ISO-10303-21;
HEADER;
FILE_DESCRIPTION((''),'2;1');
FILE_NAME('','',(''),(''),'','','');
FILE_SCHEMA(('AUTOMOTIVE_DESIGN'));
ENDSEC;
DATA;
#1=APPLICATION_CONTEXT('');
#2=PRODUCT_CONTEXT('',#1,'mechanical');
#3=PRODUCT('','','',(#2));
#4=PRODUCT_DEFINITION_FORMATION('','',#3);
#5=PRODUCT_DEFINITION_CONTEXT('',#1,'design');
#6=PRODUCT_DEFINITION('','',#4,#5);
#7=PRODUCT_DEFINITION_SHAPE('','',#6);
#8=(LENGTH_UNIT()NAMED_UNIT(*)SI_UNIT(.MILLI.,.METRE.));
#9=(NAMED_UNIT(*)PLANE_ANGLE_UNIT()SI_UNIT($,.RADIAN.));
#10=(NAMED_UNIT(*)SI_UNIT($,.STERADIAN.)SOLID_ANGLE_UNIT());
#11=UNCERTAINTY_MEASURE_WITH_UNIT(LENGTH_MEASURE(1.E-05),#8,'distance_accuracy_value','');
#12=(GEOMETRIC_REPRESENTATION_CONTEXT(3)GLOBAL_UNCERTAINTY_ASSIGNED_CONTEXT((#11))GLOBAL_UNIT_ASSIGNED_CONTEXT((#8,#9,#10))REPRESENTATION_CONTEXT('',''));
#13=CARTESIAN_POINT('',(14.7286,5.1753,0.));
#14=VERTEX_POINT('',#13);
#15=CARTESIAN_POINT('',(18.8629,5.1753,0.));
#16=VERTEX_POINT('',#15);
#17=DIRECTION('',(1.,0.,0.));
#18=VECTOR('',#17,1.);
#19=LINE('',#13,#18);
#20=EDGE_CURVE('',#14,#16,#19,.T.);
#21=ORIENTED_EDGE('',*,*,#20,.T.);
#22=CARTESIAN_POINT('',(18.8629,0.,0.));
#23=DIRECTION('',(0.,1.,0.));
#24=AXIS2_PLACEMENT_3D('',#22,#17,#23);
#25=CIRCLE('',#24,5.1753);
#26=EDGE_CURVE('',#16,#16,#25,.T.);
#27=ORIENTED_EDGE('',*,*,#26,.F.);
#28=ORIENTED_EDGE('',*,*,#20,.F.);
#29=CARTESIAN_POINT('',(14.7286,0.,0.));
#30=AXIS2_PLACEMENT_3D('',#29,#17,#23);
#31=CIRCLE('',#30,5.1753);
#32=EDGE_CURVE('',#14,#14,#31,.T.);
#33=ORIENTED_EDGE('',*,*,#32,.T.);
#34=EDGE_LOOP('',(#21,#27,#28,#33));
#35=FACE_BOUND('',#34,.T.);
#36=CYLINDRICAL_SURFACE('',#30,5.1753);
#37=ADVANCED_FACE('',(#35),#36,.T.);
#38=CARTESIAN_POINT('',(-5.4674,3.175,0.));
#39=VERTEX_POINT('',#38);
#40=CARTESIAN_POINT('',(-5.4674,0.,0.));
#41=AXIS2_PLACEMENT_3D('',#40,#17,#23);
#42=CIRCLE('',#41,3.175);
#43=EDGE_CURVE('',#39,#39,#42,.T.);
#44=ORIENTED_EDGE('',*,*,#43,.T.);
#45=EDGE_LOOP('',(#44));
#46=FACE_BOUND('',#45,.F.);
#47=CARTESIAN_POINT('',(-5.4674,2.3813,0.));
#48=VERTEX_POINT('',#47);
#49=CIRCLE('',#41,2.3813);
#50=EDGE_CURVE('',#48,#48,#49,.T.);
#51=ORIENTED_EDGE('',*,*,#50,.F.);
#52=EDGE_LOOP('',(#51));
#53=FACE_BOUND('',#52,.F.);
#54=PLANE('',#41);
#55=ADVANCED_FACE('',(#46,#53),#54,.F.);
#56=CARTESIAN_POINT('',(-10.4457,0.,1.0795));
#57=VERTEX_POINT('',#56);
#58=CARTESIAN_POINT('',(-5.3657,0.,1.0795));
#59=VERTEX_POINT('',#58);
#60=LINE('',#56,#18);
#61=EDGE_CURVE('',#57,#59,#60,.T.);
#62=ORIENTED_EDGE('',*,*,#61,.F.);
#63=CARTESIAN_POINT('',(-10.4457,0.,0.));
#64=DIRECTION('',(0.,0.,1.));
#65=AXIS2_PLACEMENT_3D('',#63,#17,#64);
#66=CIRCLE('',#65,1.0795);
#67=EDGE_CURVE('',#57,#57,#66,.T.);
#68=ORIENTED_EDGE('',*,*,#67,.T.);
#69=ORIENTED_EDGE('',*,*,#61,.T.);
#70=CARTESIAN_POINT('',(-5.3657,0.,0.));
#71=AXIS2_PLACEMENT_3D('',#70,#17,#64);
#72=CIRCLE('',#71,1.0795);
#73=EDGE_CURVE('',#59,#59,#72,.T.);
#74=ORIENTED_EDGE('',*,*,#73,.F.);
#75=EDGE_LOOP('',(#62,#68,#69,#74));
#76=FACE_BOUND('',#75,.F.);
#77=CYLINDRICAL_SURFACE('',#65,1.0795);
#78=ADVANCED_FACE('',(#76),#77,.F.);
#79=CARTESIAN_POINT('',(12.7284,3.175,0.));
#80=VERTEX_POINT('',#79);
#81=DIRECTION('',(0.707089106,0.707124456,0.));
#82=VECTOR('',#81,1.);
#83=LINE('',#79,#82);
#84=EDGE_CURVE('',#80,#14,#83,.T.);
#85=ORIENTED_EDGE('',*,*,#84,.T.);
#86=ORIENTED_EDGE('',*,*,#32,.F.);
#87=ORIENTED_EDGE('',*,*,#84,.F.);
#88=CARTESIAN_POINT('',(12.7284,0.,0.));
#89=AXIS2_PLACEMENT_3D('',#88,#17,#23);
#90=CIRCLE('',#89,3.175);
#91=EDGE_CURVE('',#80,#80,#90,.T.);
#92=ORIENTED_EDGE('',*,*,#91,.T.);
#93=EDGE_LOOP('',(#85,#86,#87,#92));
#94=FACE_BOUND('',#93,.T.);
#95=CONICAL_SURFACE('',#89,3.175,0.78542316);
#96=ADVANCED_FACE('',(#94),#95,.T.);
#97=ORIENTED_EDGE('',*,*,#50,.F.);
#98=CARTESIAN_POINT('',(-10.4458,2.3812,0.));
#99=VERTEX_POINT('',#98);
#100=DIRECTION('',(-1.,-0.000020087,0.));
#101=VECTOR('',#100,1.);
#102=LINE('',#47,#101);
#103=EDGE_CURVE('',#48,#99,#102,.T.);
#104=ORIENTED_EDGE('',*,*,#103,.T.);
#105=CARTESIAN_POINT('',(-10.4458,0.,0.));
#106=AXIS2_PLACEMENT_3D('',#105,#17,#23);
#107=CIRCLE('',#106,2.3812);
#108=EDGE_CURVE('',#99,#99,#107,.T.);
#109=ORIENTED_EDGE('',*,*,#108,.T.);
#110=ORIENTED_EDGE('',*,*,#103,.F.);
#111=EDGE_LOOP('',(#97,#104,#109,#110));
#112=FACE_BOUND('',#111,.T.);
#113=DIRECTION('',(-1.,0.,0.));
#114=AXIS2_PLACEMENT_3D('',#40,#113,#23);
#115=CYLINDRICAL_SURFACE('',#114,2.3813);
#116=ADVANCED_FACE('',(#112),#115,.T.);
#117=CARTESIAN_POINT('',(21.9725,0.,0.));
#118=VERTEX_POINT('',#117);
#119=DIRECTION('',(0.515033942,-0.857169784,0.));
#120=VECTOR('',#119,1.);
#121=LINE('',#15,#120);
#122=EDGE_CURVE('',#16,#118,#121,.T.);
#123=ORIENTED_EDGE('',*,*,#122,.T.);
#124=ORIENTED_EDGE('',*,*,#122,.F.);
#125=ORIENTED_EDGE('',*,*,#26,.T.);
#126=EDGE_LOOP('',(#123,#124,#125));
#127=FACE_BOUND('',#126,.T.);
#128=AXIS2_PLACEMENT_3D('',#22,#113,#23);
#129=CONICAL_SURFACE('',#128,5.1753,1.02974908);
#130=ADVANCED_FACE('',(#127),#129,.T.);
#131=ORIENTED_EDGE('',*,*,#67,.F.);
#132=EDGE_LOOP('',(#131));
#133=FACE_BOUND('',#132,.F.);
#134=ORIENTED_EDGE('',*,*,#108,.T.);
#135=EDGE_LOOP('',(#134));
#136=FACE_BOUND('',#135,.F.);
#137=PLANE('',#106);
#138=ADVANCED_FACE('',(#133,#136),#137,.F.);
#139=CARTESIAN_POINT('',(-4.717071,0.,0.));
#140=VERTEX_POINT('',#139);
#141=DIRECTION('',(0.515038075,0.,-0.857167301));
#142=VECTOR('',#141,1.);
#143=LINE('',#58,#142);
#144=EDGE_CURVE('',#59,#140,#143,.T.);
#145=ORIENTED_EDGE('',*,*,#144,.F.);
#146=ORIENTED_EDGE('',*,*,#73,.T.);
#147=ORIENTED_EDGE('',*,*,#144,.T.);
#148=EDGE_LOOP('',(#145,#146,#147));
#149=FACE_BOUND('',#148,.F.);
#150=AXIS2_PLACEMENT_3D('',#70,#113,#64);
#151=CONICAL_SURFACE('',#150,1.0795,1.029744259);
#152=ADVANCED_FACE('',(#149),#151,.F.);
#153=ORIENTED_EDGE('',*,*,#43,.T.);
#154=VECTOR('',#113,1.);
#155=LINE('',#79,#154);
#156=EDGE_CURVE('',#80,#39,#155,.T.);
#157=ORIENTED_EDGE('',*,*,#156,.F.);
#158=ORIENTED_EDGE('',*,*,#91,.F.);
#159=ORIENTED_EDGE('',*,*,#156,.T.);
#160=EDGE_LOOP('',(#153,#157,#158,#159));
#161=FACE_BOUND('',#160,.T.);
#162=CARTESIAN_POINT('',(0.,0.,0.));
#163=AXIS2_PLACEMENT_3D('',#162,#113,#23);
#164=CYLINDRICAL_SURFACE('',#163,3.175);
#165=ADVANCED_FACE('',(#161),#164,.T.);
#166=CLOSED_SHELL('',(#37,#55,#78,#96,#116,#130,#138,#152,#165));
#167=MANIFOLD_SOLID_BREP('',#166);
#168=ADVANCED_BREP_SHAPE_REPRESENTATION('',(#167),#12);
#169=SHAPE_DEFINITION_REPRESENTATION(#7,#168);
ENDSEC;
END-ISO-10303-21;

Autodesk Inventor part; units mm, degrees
ref_plane "YZ Plane" through (0, 0, 0) normal (1, 0, 0) x (0, 1, 0)
ref_plane "XZ Plane" through (0, 0, 0) normal (0, 1, 0) x (-1, 0, 0)
ref_plane "XY Plane" through (0, 0, 0) normal (0, 0, 1) x (1, 0, 0)
sketch "Sketch1" plane through (0, 0, 0) normal (0, 0, 1) x (1, 0, 0)
  line L0 (0, 0) -> (21.9725, 0)
  line L1 (40.4812, 0) -> (40.4812, 7.9375) construction
  line L2 (40.4812, 7.9375) -> (31.75, 7.9375)
  line L3 (0, 7.9375) -> (0, 6.35)
  line L4 (31.75, 0) -> (31.75, 7.9375) construction
  line L5 (31.75, 9.525) -> (22.225, 9.525)
  line L6 (22.225, 9.525) -> (22.225, 7.9375)
  line L7 (8.7312, 0) -> (8.7312, 17.4625) construction
  line L8 (8.7312, 17.4625) -> (0, 17.4625) construction
  line L9 (0, 17.4625) -> (0, 7.9375) construction
  line L10 (8.7312, 14.2875) -> (9.525, 14.2875) construction
  line L11 (9.525, 14.2875) -> (9.525, 7.9375) construction
  line L12 (9.525, 14.2875) -> (9.525, 27.94) construction
  line L13 (9.525, 27.94) -> (19.05, 27.94) construction
  line L14 (19.05, 27.94) -> (19.05, 7.9375) construction
  line L15 (22.225, 9.525) -> (22.225, 14.2875) construction
  line L16 (22.225, 14.2875) -> (21.4312, 14.2875) construction
  line L17 (21.4312, 14.2875) -> (21.4312, 7.9375) construction
  line L18 (21.4312, 14.2875) -> (21.4312, 17.4625) construction
  line L19 (21.4312, 17.4625) -> (14.2875, 17.4625) construction
  line L20 (14.2875, 17.4625) -> (14.2875, 0) construction
  line L21 (14.2875, 27.94) -> (14.2875, 17.4625) construction
  line L22 (14.1605, 27.94) -> (14.1605, 0) construction
  line L23 (11.9062, 27.94) -> (11.9062, 0) construction
  circle A0 centre (11.9062, 7.5565) radius 2.3813 construction
  line L24 (0, 5.5562) -> (6.2514, 5.5563) construction
  line L25 (0, 6.35) -> (6.2514, 6.35)
  line L26 (6.2514, 6.35) -> (6.2514, 5.5563)
  line L27 (6.2514, 5.5563) -> (6.2514, 0) construction
  line L28 (9.8391, 5.1753) -> (13.9734, 5.1753) construction
  line L29 (0, 3.175) -> (12.7284, 3.175)
  line L30 (6.2514, 5.5563) -> (19.0308, 5.5563)
  line L31 (0, 6.35) -> (0, 0) construction
  circle A1 centre (11.9062, 5.5562) radius 2.3813 construction
  circle A2 centre (11.9062, 5.8103) radius 2.3813 construction
  line L32 (14.2875, 8.1915) -> (9.525, 8.1915) construction
  line L33 (0, 3.175) -> (-5.4674, 3.175)
  line L34 (-5.4674, 3.175) -> (-5.4674, 2.3813)
  line L35 (-5.4674, 2.3813) -> (-10.4458, 2.3812)
  line L36 (-10.4458, 2.3812) -> (-10.4458, 0)
  line L37 (-10.4458, 0) -> (0, 0)
  line L38 (9.8391, 5.1753) -> (7.8389, 3.175) construction
  line L39 (12.7284, 3.175) -> (14.7286, 5.1753)
  line L40 (13.9734, 5.1753) -> (17.083, 0) construction
  line L41 (14.7286, 5.1753) -> (18.8629, 5.1753)
  line L42 (18.8629, 5.1753) -> (21.9725, 0)
  line L43 (19.0308, 5.5563) -> (22.3693, 0)
  line L44 (22.225, 5.5563) -> (31.75, 5.5563) construction
  line L45 (19.0308, 5.5563) -> (22.225, 5.5563) construction
  line L46 (22.225, 7.9375) -> (22.225, 0) construction
  line L47 (31.75, 7.9375) -> (31.75, 9.525)
  line L48 (31.75, 7.9375) -> (22.225, 7.9375) construction
  line L49 (22.225, 7.9375) -> (0, 7.9375)
  line L50 (31.75, 5.5563) -> (40.4812, 5.5563) construction
  line L51 (22.225, 0) -> (40.4812, 0)
  line L52 (22.3693, 0) -> (22.225, 0)
  line L53 (21.9725, 0) -> (22.3693, 0) construction
  line L54 (12.7284, 3.175) -> (40.4812, 3.175) construction
  line L55 (40.4812, 7.9375) -> (101.6, 7.9375)
  line L56 (101.6, 7.9375) -> (101.6, 0)
  line L57 (101.6, 0) -> (40.4812, 0)
  dimension "d0" = 7.9375
  dimension "d1" = 40.4813
  dimension "d2" = 9.525
  dimension "d3" = 8.7312
  dimension "d5" = 22.225
  dimension "d6" = 17.4625
  dimension "d7" = 8.7312
  dimension "d8" = 0.7937
  dimension "d9" = 14.2875
  dimension "d10" = 27.94
  dimension "d11" = 9.525
  dimension "d12" = 0.7937
  dimension "d14" = 7.1437
  dimension "d15" = 17.4625
  dimension "d16" = 0.127
  dimension "d17" = 4.7625
  dimension "d18" = 4.7625
  dimension "d19" = 5.5563
  dimension "d20" = 6.35
  dimension "d22" = 3.175
  dimension "d23" = 4.7625
  dimension "d24" = 4.7625
  dimension "d25" = 4.7625
  dimension "d26" = 0.254
  dimension "d27" = 2.0671
  dimension "d29" = 0.381
  dimension "d30" = 5.4673
  dimension "d31" = 4.9784
  dimension "d32" = 2.3813
  dimension "d33" = 45
  dimension "d34" = 45
  dimension "d35" = 0.0635
  dimension "d36" = 2.0671
  dimension "d37" = 59
  dimension "d38" = 4.1342
  dimension "d39" = 1.5875
  dimension "d40" = 0.3969
  dimension "d41" = 9.525
  dimension "d42" = 14.2875
  dimension "d43" = 61.1187
revolve "Revolution1" add sketch "Sketch1" angle 360 about axis through (0, 0, 0) along (1, 0, 0) contours L37 L36 L35 L34 L33 L29 L39 L41 L42 L0
sketch "Sketch2" plane through (-10.4457, 0, 0) normal (-1, 0, 0) x (0, 0, 1)
  circle A0 centre (0, 0) radius 2.3813 projected
hole "Hole1" at (-10.4457, 0, 0) direction (1, 0, 0) diameter 2.159 depth 5.08 tip angle 118
equation "\"d7\" = d3"
equation "\"d12\" = d8"
equation "\"d15\" = d6"
equation "\"d34\" = d33"
equation "\"d36\" = d27"
equation "\"d38\" = d27 + d36"
equation "\"d42\" = d9"
properties part number "Ball Shift" material "Steel"
